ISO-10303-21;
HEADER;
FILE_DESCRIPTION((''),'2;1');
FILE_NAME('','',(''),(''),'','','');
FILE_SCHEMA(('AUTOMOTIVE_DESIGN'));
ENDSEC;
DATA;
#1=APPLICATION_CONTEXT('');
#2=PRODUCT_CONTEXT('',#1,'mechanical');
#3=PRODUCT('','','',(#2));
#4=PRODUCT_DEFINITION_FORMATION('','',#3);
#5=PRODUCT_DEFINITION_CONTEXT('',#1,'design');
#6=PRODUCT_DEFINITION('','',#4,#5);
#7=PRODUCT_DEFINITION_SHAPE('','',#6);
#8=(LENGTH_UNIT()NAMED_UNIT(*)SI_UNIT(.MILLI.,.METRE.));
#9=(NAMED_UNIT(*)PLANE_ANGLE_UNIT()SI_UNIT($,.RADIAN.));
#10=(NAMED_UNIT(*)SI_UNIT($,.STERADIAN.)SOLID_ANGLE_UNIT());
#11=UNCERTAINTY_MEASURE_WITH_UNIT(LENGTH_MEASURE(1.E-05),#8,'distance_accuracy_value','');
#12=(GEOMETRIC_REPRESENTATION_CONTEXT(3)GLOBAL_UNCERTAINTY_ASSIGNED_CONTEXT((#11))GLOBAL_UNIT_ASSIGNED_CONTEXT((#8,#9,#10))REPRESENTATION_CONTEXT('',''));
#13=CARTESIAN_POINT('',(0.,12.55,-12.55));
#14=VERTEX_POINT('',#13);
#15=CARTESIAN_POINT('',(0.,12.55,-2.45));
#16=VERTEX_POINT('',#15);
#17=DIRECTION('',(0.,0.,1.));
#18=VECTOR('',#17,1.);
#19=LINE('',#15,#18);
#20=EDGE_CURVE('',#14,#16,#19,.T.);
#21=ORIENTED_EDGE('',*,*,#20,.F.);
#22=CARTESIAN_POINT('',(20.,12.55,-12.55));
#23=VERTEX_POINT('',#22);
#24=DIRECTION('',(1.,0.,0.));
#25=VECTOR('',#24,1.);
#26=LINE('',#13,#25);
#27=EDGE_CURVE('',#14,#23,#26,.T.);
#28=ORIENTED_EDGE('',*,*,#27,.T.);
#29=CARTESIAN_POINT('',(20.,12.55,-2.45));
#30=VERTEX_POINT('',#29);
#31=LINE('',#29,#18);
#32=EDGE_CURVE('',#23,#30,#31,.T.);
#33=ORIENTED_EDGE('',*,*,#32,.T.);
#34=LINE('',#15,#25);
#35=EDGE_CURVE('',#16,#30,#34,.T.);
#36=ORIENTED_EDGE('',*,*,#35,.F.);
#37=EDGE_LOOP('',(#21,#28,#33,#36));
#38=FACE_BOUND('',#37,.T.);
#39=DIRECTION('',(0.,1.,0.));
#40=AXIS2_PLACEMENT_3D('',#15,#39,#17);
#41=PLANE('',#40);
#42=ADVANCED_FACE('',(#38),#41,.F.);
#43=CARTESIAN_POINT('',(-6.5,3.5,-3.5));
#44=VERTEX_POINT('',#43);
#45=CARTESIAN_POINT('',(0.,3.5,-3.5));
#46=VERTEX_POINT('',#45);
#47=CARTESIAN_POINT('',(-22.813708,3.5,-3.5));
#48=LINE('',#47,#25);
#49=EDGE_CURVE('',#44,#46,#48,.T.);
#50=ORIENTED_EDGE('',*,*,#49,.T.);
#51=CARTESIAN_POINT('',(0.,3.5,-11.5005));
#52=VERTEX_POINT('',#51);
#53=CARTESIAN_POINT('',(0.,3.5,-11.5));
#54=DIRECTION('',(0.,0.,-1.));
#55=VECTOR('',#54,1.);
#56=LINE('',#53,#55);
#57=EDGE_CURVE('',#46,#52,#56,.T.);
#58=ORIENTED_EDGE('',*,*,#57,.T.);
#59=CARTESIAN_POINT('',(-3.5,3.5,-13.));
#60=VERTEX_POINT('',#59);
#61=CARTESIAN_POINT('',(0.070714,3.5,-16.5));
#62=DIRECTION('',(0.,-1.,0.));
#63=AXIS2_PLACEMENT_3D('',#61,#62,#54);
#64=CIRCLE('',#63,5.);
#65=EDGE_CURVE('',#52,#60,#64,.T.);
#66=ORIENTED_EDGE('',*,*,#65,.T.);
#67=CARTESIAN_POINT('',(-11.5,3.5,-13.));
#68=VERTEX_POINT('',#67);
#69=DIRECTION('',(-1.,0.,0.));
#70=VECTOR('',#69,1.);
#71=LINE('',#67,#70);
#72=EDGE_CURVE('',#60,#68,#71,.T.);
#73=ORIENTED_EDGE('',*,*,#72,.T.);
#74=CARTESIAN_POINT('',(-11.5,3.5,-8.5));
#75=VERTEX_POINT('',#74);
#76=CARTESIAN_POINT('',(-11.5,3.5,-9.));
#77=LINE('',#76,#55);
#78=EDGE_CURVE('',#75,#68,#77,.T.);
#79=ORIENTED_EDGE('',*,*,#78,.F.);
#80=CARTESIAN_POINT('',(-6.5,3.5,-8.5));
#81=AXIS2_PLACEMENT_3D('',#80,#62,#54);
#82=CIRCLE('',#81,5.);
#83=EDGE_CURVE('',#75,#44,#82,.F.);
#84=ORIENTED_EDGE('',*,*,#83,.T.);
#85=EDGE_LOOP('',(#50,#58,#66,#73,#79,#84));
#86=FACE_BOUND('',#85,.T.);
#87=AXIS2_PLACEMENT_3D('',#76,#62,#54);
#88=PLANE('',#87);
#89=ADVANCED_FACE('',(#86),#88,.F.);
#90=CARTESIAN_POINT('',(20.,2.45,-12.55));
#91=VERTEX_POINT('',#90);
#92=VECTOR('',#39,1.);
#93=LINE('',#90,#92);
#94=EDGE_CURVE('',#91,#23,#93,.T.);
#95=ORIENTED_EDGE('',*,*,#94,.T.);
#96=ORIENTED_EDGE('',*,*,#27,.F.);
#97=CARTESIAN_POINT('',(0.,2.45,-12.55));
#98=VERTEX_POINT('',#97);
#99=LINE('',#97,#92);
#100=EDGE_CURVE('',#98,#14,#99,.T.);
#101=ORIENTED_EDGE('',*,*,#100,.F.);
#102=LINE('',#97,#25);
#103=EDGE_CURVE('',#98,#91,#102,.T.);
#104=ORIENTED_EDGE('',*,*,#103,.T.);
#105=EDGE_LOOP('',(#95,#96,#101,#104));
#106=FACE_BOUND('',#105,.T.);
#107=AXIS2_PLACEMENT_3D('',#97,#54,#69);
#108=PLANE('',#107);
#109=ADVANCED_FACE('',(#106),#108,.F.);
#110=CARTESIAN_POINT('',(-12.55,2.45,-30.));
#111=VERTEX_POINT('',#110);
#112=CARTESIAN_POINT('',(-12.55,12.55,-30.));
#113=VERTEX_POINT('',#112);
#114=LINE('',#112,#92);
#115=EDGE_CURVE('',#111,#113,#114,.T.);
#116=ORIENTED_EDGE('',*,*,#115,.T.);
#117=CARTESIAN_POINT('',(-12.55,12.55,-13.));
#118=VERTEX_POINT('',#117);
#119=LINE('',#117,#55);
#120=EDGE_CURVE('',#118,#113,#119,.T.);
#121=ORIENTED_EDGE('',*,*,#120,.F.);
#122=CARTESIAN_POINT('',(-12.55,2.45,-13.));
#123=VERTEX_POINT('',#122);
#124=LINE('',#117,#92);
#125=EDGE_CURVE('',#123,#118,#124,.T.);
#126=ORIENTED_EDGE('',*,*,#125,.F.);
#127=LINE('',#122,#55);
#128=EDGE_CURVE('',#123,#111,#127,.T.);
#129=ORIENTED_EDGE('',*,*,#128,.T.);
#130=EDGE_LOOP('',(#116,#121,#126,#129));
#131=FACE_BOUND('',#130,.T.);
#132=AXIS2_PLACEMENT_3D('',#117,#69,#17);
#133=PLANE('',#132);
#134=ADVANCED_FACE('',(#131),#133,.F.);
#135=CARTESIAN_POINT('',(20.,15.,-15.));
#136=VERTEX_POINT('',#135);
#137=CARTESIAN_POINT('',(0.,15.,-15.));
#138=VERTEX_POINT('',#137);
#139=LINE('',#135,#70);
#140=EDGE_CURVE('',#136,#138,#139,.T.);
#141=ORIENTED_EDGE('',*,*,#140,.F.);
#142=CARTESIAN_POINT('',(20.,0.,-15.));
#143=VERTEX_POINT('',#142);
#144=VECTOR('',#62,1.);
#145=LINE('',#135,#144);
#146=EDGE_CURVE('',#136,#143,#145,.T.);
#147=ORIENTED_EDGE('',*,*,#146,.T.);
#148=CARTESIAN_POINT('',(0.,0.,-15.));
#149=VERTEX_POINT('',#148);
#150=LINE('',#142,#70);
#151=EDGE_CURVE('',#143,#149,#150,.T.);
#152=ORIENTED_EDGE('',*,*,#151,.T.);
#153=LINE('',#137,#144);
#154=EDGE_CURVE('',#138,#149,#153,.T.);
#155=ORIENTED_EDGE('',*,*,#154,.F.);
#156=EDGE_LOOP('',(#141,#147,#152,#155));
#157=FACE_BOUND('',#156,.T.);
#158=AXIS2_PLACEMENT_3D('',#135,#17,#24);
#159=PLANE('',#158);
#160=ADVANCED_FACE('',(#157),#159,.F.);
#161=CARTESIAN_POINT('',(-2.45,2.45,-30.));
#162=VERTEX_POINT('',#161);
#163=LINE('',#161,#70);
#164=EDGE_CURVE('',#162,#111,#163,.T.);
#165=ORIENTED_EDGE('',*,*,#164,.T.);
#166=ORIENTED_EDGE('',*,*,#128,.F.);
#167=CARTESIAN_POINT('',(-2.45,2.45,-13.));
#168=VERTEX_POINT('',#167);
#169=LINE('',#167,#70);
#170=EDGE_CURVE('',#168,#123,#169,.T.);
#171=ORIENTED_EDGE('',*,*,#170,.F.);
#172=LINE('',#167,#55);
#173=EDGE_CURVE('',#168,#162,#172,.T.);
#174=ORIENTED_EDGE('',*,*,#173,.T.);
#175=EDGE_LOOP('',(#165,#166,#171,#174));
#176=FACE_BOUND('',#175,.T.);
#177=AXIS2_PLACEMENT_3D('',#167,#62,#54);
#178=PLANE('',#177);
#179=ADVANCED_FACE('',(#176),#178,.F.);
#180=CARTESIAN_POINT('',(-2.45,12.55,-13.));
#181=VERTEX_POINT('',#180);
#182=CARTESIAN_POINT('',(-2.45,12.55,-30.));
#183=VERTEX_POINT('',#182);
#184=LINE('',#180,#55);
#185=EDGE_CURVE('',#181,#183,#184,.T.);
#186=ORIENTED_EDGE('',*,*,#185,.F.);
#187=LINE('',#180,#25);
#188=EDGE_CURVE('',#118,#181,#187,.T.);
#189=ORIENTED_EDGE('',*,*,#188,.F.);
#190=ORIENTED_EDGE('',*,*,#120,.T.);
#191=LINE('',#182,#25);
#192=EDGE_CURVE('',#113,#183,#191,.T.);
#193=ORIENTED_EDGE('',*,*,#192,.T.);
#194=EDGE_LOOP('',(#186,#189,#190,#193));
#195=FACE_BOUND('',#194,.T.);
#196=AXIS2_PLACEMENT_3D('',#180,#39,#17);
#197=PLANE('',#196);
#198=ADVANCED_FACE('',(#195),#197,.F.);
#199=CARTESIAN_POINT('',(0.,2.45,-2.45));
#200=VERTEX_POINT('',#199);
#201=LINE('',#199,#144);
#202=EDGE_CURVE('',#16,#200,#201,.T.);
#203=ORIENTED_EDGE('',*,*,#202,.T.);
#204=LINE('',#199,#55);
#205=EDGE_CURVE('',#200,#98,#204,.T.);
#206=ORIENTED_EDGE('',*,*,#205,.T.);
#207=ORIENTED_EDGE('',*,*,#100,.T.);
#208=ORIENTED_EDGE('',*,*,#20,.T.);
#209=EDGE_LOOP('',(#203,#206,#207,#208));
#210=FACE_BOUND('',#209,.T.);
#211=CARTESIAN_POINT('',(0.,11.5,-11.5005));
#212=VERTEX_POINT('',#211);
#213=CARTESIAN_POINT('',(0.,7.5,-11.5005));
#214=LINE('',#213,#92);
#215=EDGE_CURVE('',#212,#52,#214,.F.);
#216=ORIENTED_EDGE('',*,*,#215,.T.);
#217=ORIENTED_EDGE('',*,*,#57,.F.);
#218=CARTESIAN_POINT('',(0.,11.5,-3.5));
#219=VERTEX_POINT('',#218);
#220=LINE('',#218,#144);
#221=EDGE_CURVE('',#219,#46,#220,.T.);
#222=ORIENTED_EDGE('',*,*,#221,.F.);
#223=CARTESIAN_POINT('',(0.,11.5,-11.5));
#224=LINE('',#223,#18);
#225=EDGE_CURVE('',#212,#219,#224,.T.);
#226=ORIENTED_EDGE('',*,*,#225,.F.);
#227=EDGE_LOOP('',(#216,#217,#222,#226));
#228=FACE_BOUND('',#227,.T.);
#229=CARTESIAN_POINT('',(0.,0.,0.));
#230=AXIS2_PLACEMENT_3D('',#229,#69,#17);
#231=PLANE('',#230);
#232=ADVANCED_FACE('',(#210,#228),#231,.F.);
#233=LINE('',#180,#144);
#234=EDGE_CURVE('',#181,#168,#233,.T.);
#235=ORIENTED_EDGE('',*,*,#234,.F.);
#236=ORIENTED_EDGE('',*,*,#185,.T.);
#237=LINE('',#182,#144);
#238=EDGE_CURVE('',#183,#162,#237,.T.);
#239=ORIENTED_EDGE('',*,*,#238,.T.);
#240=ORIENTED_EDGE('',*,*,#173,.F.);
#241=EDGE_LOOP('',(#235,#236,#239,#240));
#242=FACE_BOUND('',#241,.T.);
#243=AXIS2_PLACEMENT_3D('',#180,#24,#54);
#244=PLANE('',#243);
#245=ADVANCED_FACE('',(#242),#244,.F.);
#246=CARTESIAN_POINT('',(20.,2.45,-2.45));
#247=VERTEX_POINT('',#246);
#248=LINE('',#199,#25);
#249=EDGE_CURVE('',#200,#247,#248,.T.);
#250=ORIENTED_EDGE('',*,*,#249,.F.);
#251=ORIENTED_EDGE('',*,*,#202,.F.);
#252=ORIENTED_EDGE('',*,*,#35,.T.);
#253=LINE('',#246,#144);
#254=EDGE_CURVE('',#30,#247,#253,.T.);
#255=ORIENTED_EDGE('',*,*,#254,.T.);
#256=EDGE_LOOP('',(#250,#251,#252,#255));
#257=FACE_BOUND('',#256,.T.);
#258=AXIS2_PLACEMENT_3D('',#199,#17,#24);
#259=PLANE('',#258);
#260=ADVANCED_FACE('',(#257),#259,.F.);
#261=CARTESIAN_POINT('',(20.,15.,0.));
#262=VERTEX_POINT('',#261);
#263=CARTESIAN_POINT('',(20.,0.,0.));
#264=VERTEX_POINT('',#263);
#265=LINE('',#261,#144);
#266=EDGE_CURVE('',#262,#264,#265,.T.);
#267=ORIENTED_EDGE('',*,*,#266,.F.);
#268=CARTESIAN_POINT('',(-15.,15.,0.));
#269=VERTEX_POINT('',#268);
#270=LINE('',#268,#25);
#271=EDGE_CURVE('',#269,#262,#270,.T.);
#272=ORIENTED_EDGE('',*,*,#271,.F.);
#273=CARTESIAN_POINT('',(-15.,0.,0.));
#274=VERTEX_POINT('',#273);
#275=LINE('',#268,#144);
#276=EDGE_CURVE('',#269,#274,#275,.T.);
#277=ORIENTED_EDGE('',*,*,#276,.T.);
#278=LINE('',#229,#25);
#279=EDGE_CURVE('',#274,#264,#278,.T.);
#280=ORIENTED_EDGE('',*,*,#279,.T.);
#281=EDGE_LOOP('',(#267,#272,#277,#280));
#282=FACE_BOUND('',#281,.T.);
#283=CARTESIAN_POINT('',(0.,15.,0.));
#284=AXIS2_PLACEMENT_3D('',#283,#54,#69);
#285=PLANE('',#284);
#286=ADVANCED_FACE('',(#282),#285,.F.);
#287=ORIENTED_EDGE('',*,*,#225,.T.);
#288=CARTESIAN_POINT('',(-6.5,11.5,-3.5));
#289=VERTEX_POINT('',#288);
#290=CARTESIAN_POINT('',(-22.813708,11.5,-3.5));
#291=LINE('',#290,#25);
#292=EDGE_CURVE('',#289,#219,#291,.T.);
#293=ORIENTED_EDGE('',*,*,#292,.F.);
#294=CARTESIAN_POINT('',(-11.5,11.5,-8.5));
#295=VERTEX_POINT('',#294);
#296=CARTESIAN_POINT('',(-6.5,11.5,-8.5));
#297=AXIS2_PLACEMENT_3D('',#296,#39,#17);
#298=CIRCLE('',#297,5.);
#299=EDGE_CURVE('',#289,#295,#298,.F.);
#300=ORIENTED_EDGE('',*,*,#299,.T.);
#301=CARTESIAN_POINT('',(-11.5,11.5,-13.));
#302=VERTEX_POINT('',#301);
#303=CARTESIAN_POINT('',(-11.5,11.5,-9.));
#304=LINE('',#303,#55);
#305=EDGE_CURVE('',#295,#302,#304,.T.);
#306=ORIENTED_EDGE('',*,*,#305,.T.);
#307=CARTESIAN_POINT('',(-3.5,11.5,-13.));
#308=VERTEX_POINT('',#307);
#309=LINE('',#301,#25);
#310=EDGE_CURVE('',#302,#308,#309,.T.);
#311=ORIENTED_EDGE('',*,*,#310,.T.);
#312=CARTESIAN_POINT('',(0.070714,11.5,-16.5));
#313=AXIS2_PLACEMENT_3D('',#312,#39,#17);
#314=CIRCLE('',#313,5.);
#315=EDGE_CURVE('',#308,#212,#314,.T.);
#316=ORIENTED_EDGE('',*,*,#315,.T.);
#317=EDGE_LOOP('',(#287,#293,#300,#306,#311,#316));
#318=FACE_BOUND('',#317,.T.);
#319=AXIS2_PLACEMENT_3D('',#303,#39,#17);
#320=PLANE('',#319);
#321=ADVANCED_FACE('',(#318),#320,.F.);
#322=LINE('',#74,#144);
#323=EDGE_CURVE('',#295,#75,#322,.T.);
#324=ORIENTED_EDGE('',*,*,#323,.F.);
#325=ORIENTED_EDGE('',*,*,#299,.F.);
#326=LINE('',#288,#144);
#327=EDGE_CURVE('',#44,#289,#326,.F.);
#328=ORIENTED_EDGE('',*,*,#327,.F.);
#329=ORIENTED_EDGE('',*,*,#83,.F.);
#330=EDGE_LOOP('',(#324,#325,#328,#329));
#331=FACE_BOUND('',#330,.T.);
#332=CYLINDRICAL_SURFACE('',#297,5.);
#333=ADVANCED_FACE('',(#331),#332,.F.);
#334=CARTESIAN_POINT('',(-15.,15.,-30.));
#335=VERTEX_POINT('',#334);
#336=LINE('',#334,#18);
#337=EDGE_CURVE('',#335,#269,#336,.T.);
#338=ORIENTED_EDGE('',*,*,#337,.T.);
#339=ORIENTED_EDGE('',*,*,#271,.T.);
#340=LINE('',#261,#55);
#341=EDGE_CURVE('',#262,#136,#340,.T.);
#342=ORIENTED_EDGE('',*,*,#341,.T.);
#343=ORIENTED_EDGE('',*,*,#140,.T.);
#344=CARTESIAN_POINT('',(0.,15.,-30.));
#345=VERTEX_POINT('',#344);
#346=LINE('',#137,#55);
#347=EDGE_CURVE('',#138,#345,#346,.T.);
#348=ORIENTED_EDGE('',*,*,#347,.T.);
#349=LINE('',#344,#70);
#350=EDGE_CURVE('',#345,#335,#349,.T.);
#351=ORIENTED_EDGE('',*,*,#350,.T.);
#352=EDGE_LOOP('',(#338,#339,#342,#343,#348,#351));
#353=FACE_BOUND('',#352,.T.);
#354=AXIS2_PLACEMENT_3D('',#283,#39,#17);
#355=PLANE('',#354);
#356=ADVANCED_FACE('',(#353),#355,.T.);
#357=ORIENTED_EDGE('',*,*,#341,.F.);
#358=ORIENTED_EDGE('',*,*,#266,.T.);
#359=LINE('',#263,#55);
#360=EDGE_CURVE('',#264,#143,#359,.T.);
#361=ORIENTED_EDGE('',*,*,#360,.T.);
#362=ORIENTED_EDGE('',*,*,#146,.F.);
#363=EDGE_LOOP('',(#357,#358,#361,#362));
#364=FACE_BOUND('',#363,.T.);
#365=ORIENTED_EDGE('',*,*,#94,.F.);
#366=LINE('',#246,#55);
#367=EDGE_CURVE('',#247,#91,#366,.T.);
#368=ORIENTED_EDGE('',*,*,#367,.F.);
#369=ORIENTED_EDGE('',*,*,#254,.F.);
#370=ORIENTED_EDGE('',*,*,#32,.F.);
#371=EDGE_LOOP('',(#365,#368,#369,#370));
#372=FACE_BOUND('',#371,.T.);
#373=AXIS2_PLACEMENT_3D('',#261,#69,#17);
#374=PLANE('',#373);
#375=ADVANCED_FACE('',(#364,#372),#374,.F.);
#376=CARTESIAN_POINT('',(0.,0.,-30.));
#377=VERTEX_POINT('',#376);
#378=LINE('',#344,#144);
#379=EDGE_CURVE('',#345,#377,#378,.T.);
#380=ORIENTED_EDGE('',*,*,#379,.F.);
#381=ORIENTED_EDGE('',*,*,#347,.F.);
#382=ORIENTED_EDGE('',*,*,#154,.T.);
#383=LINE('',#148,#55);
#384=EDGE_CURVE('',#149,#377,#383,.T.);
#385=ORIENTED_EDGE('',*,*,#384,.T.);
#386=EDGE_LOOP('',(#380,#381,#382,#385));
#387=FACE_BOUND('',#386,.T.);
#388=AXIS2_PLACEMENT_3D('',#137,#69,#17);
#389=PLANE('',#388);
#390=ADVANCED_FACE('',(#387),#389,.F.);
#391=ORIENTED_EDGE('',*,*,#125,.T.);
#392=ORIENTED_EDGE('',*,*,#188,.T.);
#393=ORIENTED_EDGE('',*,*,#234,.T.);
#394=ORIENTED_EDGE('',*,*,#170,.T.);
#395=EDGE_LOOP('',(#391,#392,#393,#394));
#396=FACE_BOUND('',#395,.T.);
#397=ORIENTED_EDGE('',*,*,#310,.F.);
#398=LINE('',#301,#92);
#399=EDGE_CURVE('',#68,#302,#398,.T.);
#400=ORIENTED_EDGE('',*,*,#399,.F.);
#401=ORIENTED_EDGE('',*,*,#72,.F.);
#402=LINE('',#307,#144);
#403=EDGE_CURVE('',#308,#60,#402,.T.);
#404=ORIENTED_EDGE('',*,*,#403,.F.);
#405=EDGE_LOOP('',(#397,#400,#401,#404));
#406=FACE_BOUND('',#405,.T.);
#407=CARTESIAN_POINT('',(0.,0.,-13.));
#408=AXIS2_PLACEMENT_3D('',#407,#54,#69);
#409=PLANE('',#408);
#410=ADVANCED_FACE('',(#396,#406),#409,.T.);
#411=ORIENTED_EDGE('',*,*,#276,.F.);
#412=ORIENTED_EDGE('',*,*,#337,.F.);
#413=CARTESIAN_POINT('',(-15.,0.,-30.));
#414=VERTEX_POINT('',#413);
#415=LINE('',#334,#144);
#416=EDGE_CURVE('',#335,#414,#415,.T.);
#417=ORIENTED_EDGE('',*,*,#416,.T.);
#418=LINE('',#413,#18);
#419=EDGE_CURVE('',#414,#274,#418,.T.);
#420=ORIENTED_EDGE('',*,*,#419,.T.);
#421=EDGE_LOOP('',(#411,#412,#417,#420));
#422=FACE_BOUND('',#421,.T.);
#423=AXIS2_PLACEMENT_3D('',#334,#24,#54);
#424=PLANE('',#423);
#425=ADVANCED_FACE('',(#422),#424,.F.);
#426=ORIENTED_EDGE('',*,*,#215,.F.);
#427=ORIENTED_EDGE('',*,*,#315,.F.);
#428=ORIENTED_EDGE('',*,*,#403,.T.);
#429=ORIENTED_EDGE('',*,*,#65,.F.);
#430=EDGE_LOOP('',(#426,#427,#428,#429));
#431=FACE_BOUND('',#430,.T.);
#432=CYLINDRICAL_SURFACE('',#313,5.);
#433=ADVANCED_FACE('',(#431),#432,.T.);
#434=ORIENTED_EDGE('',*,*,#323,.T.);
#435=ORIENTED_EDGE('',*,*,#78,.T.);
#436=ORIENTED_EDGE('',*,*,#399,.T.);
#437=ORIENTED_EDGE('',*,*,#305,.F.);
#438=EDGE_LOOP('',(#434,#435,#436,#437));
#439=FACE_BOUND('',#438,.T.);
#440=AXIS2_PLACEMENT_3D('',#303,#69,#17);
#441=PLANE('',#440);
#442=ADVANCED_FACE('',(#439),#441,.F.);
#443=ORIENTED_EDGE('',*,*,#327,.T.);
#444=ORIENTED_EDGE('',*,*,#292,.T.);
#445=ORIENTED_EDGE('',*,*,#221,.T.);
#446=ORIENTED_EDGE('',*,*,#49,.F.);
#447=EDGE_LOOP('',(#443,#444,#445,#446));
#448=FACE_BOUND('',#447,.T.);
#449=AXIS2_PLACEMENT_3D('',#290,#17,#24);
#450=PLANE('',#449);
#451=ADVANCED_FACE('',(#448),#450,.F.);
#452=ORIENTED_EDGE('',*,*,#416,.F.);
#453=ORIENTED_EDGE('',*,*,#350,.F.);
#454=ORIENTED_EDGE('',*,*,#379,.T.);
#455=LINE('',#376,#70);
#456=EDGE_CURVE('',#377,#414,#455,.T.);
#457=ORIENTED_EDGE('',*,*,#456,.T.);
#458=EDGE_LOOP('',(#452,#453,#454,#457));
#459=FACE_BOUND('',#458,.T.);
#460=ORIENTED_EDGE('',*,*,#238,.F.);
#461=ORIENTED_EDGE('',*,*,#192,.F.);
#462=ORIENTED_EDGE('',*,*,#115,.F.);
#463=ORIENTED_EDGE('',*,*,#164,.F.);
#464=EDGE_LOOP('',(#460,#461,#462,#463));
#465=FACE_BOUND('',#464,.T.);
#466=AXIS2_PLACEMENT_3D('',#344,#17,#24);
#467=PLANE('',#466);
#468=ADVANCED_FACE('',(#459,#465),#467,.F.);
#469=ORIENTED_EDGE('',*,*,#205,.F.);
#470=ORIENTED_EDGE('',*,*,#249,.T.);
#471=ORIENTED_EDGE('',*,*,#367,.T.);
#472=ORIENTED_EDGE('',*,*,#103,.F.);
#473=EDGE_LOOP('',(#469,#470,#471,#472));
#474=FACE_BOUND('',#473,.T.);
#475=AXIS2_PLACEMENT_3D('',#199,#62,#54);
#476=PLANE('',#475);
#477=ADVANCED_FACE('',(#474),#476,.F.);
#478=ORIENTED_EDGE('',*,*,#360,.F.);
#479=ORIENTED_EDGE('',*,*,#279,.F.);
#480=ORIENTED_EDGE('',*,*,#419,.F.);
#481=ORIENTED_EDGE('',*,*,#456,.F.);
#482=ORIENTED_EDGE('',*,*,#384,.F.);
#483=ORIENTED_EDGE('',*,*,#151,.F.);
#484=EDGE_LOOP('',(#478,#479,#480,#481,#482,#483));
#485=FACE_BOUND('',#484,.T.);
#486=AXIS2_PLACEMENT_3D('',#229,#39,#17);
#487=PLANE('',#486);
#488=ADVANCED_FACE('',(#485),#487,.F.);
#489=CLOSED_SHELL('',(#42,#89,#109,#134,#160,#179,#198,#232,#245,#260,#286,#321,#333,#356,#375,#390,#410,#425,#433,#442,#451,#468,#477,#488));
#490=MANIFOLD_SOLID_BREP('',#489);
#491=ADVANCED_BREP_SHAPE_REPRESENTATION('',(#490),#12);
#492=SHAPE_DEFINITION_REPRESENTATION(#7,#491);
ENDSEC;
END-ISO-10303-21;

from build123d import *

# Parameters (mm, degrees)
BOSS_EXTRUDE1_DEPTH = 15
SKETCH2_W           = 10.1
SKETCH2_H           = 10.1
CUT_EXTRUDE1_DEPTH  = 20
SKETCH3_W           = 10.1
SKETCH3_H           = 10.1
CUT_EXTRUDE2_DEPTH  = 17
SKETCH4_W           = 8
SKETCH4_H           = 8
CUT_EXTRUDE3_DEPTH  = 4
CUT_EXTRUDE4_REACH  = 41.051
SKETCH5_W           = 8
SKETCH5_H           = 8
FILLET1_R           = 5


with BuildPart() as part:
    # Sketch1 → Boss-Extrude1 (new body)
    with BuildSketch(Plane(origin=(0, 0, 0), x_dir=(1, 0, 0), z_dir=(0, 1, 0))):
        Polygon((0, 0), (20, 0), (20, 15), (0, 15), (0, 30), (-15, 30), (-15, 0), align=None)
    extrude(amount=BOSS_EXTRUDE1_DEPTH)

    # Sketch2 → Cut-Extrude1 (cut)
    with BuildSketch(Plane(origin=(20, 0, 0), x_dir=(0, 0, -1), z_dir=(1, 0, 0))):
        with Locations((7.5, 7.5)):
            Rectangle(SKETCH2_W, SKETCH2_H)
    extrude(amount=-CUT_EXTRUDE1_DEPTH, mode=Mode.SUBTRACT)

    # Sketch3 → Cut-Extrude2 (cut)
    with BuildSketch(Plane(origin=(0, 0, -30), x_dir=(-1, 0, 0), z_dir=(0, 0, -1))):
        with Locations((7.5, 7.5)):
            Rectangle(SKETCH3_W, SKETCH3_H)
    extrude(amount=-CUT_EXTRUDE2_DEPTH, mode=Mode.SUBTRACT)

    # Sketch4 → Cut-Extrude3 (cut)
    with BuildSketch(Plane(origin=(0, 0, -13), x_dir=(-1, 0, 0), z_dir=(0, 0, -1))):
        with Locations((7.5, 7.5)):
            Rectangle(SKETCH4_W, SKETCH4_H)
    extrude(amount=-CUT_EXTRUDE3_DEPTH, mode=Mode.SUBTRACT)

    # Cut-Extrude4: up to this face of the body (flat: up to its plane)
    cut_extrude4_end = Plane(part.part.faces().sort_by_distance((-11.5, 7.5, -11))[0])
    # Sketch5 → Cut-Extrude4 (cut, up to the picked face)
    with BuildSketch(Plane(origin=(0, 0, 0), x_dir=(0, 0, -1), z_dir=(1, 0, 0)), mode=Mode.PRIVATE) as cut_extrude4_sk1:
        with Locations((7.5, 7.5)):
            Rectangle(SKETCH5_W, SKETCH5_H)
    cut_extrude4_tool1 = split(extrude(cut_extrude4_sk1.sketch, amount=-CUT_EXTRUDE4_REACH, mode=Mode.PRIVATE), bisect_by=cut_extrude4_end, keep=Keep.BOTH, mode=Mode.PRIVATE)
    add(cut_extrude4_tool1.solids().sort_by(Axis((0, 7.5, -7.5), (-1, 0, 0)))[0], mode=Mode.SUBTRACT)

    # Fillet1
    # the kernel refuses this fillet: 5 mm, written as the material it adds along each edge
    with BuildSketch(Plane(origin=(-11.5, -9, -3.5), x_dir=(1, 0, 0), z_dir=(0, 1, 0))) as fillet1_piece_1_section:
        with BuildLine():
            CenterArc((FILLET1_R, FILLET1_R), FILLET1_R, 180, 90)
            Line((0, FILLET1_R), (0, 0))
            Line((0, 0), (FILLET1_R, 0))
        make_face()
    fillet1_piece_1 = extrude(amount=20.5, mode=Mode.PRIVATE)
    fillet1_piece_1 = split(fillet1_piece_1, bisect_by=Plane(origin=(-11.5, 0, -3.5), z_dir=(0, 1, 0)), keep=Keep.TOP, mode=Mode.PRIVATE)
    add(fillet1_piece_1)
    # the kernel refuses this fillet: 5 mm, written as the material it takes off along each edge
    with BuildSketch(Plane(origin=(-3.5, 3.5, -11.5), x_dir=(1, 0, 0), z_dir=(0, 1, 0))) as fillet1_2_piece_1:
        with BuildLine():
            CenterArc((3.570714214, 5), FILLET1_R, 224.427004001, 45.572995999)
            Line((0, 1.5), (0, 0))
            Line((0, 0), (3.570714214, 0))
        make_face()
    extrude(amount=8, mode=Mode.SUBTRACT)


solid = part.part
